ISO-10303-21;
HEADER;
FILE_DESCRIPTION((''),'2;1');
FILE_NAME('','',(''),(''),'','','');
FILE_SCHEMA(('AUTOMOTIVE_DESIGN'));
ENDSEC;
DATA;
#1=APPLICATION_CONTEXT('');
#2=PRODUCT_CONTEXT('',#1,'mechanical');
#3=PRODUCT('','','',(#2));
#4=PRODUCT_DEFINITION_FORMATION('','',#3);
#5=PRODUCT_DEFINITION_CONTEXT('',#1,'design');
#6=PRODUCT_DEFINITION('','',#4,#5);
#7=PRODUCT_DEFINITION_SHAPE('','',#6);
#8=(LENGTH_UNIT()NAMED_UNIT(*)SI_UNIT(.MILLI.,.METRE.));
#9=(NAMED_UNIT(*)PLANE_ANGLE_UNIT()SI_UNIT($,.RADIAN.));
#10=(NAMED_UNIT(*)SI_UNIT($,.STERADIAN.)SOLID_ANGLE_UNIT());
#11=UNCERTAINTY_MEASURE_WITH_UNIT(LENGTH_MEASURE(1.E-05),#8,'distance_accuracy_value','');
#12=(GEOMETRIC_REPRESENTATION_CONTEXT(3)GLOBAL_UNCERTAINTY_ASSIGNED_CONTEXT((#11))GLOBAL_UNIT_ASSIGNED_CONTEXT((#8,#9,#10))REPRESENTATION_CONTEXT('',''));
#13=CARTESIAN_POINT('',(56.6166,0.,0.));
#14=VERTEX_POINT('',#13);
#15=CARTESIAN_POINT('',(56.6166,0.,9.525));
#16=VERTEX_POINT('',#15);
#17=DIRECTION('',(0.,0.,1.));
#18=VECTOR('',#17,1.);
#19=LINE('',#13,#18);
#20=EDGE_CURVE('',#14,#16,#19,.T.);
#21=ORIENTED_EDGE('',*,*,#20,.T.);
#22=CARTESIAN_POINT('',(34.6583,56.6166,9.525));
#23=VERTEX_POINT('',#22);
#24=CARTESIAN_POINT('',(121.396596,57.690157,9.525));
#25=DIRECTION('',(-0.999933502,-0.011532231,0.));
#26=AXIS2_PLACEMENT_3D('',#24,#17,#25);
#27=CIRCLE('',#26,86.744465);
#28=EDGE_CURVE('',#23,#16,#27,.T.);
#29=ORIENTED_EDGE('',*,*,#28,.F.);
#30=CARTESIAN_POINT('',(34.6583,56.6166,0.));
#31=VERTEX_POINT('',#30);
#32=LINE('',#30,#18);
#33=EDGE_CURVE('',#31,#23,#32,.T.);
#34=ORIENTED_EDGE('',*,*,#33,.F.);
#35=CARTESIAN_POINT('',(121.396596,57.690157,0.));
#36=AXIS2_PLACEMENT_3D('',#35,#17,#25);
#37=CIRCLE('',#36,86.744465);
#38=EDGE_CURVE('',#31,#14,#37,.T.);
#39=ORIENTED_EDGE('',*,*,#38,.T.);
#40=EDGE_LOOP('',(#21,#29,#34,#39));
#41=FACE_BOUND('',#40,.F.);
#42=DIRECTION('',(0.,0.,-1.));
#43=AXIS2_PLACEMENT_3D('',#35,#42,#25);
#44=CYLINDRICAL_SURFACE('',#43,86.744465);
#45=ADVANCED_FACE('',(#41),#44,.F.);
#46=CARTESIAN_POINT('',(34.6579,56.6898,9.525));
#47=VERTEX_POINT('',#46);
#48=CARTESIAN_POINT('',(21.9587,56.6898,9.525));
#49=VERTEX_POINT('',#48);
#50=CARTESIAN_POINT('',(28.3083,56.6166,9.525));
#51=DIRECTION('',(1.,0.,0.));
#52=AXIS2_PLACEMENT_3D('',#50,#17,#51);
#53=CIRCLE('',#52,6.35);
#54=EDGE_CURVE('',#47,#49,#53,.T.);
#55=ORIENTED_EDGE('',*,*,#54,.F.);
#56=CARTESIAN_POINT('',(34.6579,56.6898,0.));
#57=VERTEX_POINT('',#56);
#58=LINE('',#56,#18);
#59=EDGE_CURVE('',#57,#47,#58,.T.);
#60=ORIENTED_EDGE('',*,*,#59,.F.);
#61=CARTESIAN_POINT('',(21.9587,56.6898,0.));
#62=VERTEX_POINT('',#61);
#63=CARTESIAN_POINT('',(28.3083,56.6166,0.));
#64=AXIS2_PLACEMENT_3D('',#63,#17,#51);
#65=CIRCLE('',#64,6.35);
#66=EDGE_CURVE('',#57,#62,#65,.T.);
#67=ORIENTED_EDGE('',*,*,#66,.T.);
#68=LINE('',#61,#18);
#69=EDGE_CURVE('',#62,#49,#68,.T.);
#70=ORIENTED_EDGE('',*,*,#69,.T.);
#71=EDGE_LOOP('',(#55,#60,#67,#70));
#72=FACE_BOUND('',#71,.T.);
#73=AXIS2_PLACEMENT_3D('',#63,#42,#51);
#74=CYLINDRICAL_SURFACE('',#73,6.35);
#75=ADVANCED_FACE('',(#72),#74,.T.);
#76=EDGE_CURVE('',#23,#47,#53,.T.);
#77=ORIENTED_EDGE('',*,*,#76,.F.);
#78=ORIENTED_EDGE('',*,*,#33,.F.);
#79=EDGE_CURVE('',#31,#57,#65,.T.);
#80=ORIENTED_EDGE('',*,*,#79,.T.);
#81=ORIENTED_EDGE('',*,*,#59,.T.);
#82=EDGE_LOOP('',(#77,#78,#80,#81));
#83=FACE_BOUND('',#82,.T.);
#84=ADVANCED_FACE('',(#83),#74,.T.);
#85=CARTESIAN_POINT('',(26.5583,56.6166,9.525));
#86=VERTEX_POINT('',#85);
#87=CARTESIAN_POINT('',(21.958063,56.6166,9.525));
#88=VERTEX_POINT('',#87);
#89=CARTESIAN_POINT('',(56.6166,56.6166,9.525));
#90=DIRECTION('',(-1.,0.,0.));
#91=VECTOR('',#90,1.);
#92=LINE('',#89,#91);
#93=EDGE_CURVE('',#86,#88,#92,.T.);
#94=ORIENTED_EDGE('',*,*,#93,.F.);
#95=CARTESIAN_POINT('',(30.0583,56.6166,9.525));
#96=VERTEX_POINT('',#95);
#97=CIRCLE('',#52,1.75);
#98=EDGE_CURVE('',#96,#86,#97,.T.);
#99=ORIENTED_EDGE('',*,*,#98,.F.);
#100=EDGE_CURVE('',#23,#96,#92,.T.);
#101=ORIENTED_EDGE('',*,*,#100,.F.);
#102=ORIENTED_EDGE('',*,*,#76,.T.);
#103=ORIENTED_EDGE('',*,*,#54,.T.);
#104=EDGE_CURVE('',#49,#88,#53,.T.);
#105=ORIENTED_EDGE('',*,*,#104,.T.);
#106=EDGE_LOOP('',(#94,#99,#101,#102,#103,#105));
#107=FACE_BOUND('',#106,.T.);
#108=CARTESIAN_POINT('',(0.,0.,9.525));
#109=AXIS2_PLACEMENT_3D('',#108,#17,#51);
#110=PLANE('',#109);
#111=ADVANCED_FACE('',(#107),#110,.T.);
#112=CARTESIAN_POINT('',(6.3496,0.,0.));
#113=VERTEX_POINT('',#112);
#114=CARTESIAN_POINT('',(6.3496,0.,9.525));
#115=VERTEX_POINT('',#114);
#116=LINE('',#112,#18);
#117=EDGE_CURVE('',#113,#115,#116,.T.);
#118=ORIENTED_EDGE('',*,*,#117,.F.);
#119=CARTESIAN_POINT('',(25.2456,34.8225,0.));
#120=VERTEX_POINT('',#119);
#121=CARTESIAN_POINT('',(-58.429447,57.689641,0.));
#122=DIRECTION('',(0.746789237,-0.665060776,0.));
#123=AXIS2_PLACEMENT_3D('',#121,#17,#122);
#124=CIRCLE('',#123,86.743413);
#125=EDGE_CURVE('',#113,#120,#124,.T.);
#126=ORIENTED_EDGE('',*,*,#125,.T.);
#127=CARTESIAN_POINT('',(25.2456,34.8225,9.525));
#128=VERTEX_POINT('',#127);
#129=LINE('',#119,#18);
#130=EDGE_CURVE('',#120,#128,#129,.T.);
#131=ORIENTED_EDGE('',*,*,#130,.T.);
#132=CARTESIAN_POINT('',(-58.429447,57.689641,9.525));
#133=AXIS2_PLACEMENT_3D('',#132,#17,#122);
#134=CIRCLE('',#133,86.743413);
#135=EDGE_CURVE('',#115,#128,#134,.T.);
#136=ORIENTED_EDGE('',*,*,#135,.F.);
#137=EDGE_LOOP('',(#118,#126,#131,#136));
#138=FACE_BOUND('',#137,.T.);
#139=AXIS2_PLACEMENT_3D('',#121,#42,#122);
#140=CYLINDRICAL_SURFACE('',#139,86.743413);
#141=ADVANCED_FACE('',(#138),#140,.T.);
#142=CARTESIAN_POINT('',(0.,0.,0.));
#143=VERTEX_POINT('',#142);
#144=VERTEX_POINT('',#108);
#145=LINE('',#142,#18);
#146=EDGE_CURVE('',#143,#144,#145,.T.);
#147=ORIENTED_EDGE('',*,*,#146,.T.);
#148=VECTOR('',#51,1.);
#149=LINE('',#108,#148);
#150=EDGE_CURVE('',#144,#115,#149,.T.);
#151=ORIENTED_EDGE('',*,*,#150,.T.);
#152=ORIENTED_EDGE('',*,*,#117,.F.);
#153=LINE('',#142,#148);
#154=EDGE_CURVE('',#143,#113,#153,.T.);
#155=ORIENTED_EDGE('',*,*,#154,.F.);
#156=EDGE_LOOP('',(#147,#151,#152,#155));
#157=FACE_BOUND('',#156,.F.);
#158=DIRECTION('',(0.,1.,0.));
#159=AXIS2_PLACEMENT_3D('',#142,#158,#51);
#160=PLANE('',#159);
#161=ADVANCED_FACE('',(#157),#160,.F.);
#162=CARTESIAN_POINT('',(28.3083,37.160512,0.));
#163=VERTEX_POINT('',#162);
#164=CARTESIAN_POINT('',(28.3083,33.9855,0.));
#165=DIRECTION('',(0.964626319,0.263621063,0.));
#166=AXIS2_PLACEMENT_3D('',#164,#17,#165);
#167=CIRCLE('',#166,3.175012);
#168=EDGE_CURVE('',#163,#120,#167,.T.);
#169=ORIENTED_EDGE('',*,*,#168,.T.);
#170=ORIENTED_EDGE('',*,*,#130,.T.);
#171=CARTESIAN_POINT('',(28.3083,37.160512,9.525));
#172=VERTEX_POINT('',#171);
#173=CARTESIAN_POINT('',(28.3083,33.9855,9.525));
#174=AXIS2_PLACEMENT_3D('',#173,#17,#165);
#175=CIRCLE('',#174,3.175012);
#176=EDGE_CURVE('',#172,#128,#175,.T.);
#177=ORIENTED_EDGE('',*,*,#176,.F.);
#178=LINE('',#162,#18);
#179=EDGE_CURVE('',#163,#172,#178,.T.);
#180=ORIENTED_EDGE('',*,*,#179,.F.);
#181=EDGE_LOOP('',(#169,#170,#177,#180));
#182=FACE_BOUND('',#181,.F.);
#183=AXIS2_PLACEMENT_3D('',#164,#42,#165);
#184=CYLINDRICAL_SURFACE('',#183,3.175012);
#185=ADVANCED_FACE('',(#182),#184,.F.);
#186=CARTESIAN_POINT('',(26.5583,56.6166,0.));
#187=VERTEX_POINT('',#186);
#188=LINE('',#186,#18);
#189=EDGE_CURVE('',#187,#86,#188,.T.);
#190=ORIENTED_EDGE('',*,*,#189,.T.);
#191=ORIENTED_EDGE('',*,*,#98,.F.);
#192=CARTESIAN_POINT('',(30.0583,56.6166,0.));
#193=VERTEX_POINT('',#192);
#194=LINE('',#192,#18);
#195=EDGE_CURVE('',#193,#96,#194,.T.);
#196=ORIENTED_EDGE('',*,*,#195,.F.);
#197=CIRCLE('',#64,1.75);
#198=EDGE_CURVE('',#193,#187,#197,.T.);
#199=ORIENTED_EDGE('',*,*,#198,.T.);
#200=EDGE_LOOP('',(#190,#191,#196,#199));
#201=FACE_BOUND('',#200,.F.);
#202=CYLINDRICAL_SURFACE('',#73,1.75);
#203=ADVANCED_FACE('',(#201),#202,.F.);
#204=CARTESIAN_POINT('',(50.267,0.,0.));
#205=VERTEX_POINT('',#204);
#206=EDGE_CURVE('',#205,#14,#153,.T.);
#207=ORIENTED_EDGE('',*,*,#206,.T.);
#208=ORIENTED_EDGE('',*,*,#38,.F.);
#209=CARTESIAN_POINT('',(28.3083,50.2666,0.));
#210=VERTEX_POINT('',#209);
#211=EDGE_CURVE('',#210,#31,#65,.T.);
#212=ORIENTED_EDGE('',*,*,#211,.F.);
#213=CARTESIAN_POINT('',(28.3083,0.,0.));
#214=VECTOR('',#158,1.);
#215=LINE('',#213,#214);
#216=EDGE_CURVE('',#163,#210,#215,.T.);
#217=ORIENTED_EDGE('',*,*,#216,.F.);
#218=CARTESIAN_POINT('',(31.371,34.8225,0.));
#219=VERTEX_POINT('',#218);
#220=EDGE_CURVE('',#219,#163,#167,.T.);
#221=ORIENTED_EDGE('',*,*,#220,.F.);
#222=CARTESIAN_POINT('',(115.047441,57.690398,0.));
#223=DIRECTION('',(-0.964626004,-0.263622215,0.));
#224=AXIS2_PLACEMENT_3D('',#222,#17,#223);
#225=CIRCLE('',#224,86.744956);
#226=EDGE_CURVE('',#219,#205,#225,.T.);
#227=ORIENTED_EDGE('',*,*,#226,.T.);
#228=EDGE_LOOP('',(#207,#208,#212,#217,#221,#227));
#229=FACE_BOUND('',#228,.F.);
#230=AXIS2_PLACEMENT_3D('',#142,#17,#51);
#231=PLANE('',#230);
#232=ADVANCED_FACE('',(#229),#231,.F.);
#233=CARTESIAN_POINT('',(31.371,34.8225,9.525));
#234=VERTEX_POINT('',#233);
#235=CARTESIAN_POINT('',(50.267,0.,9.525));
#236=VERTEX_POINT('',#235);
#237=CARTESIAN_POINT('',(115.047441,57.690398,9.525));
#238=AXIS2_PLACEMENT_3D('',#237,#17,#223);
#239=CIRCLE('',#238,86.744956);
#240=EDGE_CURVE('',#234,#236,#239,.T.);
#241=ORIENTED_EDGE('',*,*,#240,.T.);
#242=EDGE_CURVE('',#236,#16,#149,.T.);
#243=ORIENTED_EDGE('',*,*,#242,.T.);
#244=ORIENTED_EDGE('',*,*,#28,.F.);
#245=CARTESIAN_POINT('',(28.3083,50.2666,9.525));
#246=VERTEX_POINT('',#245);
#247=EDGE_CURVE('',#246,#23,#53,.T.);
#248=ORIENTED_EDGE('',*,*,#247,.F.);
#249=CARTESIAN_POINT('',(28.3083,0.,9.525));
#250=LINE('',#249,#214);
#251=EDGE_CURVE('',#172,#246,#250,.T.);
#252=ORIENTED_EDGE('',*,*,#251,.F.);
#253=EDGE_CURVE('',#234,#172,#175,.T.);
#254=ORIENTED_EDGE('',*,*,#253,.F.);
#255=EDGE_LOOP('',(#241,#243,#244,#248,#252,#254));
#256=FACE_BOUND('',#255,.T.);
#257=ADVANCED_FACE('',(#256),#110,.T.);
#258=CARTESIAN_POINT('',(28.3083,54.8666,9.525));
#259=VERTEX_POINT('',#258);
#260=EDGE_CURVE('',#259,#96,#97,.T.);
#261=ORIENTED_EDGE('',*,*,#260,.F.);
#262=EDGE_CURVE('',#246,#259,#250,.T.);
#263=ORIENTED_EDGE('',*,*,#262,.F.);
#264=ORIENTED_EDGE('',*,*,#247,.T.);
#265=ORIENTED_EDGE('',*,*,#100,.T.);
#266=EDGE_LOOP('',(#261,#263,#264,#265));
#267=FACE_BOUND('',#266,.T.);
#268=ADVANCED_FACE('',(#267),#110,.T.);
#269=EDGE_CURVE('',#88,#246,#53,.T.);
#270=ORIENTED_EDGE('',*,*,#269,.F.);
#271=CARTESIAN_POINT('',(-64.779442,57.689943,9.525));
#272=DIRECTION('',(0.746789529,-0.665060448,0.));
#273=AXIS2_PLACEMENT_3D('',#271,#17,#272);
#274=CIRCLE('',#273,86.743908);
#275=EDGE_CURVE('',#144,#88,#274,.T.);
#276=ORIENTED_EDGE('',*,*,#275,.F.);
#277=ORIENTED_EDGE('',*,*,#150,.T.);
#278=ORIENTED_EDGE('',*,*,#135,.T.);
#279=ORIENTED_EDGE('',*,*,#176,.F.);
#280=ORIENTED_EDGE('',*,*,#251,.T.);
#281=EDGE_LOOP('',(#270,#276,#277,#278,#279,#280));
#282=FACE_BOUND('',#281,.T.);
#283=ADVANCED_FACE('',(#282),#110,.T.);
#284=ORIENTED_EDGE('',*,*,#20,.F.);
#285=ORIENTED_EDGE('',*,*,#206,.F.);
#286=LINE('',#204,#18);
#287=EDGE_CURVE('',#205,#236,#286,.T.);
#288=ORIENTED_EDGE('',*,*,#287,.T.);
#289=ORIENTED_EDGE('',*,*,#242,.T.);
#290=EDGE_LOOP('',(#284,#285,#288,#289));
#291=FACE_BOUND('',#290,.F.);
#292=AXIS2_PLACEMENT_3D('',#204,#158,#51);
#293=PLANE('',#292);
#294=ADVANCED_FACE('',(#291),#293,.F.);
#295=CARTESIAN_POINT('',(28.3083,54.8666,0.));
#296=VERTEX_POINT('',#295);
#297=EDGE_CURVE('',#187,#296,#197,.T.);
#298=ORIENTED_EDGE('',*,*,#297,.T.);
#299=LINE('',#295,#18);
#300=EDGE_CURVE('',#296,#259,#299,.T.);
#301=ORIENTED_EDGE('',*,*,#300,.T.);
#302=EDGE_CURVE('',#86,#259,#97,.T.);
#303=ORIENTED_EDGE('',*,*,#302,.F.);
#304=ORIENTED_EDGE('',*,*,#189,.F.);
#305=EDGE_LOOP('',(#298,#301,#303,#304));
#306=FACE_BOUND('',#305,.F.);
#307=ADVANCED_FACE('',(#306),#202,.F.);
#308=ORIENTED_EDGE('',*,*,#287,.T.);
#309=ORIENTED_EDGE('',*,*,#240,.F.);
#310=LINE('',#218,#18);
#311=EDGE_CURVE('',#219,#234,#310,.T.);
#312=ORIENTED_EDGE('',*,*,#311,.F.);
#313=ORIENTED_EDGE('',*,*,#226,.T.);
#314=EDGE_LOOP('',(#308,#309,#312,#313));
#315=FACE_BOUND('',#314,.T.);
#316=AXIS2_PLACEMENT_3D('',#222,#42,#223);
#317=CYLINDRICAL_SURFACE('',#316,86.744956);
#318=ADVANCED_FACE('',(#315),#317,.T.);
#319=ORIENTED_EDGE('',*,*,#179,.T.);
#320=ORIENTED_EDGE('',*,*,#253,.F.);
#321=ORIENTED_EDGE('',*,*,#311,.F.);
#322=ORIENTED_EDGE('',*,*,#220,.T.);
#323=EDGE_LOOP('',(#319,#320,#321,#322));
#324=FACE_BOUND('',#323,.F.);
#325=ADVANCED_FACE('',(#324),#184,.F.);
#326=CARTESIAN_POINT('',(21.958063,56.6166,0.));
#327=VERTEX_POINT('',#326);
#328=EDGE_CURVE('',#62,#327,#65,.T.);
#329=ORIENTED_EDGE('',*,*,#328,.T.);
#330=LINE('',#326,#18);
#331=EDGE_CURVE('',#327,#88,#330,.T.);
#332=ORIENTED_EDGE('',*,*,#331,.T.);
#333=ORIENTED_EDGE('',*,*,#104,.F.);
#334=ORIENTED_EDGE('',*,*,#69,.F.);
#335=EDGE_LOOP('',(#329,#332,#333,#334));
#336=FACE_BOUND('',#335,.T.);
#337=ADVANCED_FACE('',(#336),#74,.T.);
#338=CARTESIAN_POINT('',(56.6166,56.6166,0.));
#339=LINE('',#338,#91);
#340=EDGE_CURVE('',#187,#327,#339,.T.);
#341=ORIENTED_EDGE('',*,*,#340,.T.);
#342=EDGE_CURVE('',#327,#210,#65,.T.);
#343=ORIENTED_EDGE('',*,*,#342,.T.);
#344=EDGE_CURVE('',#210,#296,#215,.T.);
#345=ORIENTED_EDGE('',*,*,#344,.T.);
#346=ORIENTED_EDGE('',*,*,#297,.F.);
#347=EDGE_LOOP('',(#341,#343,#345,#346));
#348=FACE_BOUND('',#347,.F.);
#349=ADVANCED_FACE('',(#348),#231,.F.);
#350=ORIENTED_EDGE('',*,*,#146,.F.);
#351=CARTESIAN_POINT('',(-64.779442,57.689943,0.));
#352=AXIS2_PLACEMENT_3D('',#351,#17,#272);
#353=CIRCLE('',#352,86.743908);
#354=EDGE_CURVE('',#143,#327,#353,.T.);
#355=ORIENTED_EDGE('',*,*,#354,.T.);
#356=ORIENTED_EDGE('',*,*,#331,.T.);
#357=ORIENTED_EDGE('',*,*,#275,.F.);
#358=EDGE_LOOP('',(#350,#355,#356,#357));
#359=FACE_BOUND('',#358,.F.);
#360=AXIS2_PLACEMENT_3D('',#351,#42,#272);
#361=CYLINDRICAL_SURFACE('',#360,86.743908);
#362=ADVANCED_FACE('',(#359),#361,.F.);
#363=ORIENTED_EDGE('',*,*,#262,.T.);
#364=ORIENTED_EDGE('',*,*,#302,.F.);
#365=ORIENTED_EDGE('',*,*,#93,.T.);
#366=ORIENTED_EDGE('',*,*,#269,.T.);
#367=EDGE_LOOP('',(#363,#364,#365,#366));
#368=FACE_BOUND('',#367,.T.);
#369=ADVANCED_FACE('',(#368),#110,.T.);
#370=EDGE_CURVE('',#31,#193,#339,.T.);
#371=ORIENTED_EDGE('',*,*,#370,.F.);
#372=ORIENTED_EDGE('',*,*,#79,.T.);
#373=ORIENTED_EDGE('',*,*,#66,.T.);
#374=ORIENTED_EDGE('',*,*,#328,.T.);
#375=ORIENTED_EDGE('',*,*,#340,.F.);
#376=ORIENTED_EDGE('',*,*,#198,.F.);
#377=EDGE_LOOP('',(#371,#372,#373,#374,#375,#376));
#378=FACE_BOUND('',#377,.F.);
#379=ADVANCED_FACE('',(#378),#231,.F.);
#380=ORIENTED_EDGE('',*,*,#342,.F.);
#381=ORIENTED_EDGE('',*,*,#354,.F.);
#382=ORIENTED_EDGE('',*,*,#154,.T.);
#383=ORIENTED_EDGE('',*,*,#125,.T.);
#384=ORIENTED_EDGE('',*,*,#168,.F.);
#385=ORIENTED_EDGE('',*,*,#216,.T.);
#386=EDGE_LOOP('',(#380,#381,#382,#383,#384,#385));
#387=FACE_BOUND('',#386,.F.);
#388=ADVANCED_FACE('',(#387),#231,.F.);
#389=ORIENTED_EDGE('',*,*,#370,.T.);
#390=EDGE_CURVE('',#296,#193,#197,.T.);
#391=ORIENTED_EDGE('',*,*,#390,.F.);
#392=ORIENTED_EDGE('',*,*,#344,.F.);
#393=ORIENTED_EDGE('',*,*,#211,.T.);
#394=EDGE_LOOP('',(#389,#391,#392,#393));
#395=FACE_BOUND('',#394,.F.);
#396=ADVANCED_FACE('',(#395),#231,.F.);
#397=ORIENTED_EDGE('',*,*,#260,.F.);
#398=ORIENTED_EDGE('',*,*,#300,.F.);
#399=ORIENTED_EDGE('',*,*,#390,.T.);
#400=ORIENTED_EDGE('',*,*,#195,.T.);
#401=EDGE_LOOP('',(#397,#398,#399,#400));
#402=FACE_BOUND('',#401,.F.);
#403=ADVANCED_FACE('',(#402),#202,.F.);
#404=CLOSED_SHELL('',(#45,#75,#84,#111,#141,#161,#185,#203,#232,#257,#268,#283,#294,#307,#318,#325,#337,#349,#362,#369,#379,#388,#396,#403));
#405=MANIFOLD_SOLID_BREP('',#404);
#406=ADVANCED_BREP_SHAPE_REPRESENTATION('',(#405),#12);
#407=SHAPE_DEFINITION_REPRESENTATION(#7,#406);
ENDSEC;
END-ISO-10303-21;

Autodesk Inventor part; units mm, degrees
ref_plane "XZ Plane" through (0, 0, 0) normal (0, 1, 0) x (-1, 0, 0)
ref_plane "XY Plane" through (0, 0, 0) normal (0, 0, 1) x (1, 0, 0)
sketch "Sketch1" plane through (0, 0, 0) normal (0, 0, 1) x (1, 0, 0)
  line L0 (0, 0) -> (56.6166, 0)
  line L1 (56.6166, 0) -> (56.6166, 56.6166)
  line L2 (56.6166, 56.6166) -> (0, 56.6166)
  line L3 (0, 56.6166) -> (0, 0)
  circle A0 centre (28.3083, 56.6166) radius 1.75
  circle A1 centre (28.3083, 56.6166) radius 6.35
  arc A2 (0, 0) -> (21.9587, 56.6898) centre (-64.7797, 57.6901) ccw
  arc A3 (6.3496, 0) -> (25.2456, 34.8225) centre (-58.4301, 57.6901) ccw
  line L4 (28.3083, 0) -> (28.3083, 56.6898)
  arc A4 (34.6579, 56.6898) -> (56.6166, 0) centre (121.3963, 57.6901) ccw
  arc A5 (31.371, 34.8225) -> (50.267, 0) centre (115.0467, 57.6901) ccw
  arc A6 (31.371, 34.8225) -> (25.2456, 34.8225) centre (28.3083, 33.9855) ccw
  point P0 (21.9583, 56.6166)
  point P1 (21.9578, 56.6166)
  point P2 (6.3496, 0)
  point P3 (50.267, 0)
  point P4 (34.6588, 56.6166)
  point P5 (34.6583, 56.6166)
  dimension "d3" = 12.7
  dimension "d0" = 56.6166
  dimension "d1" = 56.6166
  dimension "d2" = 3.5
  dimension "d4" = 3.175
extrude "Extrusion1" add sketch "Sketch1" along normal blind 9.525 contours A2 A1 L4 A6 A3 L0 | A1 L2 A0 | L2 A0 L4 A1 | L4 A0 L2 A1 | A1 A4 L0 A5 A6 L4
ref_plane "Work Plane2" through (28.3083, 0, 0) normal (1, 0, 0) x (0, 1, 0)
ref_plane "Work Plane1" through (56.6166, 0, 0) normal (1, 0, 0) x (0, 1, 0)
properties part number "transfer gear rod support end"
